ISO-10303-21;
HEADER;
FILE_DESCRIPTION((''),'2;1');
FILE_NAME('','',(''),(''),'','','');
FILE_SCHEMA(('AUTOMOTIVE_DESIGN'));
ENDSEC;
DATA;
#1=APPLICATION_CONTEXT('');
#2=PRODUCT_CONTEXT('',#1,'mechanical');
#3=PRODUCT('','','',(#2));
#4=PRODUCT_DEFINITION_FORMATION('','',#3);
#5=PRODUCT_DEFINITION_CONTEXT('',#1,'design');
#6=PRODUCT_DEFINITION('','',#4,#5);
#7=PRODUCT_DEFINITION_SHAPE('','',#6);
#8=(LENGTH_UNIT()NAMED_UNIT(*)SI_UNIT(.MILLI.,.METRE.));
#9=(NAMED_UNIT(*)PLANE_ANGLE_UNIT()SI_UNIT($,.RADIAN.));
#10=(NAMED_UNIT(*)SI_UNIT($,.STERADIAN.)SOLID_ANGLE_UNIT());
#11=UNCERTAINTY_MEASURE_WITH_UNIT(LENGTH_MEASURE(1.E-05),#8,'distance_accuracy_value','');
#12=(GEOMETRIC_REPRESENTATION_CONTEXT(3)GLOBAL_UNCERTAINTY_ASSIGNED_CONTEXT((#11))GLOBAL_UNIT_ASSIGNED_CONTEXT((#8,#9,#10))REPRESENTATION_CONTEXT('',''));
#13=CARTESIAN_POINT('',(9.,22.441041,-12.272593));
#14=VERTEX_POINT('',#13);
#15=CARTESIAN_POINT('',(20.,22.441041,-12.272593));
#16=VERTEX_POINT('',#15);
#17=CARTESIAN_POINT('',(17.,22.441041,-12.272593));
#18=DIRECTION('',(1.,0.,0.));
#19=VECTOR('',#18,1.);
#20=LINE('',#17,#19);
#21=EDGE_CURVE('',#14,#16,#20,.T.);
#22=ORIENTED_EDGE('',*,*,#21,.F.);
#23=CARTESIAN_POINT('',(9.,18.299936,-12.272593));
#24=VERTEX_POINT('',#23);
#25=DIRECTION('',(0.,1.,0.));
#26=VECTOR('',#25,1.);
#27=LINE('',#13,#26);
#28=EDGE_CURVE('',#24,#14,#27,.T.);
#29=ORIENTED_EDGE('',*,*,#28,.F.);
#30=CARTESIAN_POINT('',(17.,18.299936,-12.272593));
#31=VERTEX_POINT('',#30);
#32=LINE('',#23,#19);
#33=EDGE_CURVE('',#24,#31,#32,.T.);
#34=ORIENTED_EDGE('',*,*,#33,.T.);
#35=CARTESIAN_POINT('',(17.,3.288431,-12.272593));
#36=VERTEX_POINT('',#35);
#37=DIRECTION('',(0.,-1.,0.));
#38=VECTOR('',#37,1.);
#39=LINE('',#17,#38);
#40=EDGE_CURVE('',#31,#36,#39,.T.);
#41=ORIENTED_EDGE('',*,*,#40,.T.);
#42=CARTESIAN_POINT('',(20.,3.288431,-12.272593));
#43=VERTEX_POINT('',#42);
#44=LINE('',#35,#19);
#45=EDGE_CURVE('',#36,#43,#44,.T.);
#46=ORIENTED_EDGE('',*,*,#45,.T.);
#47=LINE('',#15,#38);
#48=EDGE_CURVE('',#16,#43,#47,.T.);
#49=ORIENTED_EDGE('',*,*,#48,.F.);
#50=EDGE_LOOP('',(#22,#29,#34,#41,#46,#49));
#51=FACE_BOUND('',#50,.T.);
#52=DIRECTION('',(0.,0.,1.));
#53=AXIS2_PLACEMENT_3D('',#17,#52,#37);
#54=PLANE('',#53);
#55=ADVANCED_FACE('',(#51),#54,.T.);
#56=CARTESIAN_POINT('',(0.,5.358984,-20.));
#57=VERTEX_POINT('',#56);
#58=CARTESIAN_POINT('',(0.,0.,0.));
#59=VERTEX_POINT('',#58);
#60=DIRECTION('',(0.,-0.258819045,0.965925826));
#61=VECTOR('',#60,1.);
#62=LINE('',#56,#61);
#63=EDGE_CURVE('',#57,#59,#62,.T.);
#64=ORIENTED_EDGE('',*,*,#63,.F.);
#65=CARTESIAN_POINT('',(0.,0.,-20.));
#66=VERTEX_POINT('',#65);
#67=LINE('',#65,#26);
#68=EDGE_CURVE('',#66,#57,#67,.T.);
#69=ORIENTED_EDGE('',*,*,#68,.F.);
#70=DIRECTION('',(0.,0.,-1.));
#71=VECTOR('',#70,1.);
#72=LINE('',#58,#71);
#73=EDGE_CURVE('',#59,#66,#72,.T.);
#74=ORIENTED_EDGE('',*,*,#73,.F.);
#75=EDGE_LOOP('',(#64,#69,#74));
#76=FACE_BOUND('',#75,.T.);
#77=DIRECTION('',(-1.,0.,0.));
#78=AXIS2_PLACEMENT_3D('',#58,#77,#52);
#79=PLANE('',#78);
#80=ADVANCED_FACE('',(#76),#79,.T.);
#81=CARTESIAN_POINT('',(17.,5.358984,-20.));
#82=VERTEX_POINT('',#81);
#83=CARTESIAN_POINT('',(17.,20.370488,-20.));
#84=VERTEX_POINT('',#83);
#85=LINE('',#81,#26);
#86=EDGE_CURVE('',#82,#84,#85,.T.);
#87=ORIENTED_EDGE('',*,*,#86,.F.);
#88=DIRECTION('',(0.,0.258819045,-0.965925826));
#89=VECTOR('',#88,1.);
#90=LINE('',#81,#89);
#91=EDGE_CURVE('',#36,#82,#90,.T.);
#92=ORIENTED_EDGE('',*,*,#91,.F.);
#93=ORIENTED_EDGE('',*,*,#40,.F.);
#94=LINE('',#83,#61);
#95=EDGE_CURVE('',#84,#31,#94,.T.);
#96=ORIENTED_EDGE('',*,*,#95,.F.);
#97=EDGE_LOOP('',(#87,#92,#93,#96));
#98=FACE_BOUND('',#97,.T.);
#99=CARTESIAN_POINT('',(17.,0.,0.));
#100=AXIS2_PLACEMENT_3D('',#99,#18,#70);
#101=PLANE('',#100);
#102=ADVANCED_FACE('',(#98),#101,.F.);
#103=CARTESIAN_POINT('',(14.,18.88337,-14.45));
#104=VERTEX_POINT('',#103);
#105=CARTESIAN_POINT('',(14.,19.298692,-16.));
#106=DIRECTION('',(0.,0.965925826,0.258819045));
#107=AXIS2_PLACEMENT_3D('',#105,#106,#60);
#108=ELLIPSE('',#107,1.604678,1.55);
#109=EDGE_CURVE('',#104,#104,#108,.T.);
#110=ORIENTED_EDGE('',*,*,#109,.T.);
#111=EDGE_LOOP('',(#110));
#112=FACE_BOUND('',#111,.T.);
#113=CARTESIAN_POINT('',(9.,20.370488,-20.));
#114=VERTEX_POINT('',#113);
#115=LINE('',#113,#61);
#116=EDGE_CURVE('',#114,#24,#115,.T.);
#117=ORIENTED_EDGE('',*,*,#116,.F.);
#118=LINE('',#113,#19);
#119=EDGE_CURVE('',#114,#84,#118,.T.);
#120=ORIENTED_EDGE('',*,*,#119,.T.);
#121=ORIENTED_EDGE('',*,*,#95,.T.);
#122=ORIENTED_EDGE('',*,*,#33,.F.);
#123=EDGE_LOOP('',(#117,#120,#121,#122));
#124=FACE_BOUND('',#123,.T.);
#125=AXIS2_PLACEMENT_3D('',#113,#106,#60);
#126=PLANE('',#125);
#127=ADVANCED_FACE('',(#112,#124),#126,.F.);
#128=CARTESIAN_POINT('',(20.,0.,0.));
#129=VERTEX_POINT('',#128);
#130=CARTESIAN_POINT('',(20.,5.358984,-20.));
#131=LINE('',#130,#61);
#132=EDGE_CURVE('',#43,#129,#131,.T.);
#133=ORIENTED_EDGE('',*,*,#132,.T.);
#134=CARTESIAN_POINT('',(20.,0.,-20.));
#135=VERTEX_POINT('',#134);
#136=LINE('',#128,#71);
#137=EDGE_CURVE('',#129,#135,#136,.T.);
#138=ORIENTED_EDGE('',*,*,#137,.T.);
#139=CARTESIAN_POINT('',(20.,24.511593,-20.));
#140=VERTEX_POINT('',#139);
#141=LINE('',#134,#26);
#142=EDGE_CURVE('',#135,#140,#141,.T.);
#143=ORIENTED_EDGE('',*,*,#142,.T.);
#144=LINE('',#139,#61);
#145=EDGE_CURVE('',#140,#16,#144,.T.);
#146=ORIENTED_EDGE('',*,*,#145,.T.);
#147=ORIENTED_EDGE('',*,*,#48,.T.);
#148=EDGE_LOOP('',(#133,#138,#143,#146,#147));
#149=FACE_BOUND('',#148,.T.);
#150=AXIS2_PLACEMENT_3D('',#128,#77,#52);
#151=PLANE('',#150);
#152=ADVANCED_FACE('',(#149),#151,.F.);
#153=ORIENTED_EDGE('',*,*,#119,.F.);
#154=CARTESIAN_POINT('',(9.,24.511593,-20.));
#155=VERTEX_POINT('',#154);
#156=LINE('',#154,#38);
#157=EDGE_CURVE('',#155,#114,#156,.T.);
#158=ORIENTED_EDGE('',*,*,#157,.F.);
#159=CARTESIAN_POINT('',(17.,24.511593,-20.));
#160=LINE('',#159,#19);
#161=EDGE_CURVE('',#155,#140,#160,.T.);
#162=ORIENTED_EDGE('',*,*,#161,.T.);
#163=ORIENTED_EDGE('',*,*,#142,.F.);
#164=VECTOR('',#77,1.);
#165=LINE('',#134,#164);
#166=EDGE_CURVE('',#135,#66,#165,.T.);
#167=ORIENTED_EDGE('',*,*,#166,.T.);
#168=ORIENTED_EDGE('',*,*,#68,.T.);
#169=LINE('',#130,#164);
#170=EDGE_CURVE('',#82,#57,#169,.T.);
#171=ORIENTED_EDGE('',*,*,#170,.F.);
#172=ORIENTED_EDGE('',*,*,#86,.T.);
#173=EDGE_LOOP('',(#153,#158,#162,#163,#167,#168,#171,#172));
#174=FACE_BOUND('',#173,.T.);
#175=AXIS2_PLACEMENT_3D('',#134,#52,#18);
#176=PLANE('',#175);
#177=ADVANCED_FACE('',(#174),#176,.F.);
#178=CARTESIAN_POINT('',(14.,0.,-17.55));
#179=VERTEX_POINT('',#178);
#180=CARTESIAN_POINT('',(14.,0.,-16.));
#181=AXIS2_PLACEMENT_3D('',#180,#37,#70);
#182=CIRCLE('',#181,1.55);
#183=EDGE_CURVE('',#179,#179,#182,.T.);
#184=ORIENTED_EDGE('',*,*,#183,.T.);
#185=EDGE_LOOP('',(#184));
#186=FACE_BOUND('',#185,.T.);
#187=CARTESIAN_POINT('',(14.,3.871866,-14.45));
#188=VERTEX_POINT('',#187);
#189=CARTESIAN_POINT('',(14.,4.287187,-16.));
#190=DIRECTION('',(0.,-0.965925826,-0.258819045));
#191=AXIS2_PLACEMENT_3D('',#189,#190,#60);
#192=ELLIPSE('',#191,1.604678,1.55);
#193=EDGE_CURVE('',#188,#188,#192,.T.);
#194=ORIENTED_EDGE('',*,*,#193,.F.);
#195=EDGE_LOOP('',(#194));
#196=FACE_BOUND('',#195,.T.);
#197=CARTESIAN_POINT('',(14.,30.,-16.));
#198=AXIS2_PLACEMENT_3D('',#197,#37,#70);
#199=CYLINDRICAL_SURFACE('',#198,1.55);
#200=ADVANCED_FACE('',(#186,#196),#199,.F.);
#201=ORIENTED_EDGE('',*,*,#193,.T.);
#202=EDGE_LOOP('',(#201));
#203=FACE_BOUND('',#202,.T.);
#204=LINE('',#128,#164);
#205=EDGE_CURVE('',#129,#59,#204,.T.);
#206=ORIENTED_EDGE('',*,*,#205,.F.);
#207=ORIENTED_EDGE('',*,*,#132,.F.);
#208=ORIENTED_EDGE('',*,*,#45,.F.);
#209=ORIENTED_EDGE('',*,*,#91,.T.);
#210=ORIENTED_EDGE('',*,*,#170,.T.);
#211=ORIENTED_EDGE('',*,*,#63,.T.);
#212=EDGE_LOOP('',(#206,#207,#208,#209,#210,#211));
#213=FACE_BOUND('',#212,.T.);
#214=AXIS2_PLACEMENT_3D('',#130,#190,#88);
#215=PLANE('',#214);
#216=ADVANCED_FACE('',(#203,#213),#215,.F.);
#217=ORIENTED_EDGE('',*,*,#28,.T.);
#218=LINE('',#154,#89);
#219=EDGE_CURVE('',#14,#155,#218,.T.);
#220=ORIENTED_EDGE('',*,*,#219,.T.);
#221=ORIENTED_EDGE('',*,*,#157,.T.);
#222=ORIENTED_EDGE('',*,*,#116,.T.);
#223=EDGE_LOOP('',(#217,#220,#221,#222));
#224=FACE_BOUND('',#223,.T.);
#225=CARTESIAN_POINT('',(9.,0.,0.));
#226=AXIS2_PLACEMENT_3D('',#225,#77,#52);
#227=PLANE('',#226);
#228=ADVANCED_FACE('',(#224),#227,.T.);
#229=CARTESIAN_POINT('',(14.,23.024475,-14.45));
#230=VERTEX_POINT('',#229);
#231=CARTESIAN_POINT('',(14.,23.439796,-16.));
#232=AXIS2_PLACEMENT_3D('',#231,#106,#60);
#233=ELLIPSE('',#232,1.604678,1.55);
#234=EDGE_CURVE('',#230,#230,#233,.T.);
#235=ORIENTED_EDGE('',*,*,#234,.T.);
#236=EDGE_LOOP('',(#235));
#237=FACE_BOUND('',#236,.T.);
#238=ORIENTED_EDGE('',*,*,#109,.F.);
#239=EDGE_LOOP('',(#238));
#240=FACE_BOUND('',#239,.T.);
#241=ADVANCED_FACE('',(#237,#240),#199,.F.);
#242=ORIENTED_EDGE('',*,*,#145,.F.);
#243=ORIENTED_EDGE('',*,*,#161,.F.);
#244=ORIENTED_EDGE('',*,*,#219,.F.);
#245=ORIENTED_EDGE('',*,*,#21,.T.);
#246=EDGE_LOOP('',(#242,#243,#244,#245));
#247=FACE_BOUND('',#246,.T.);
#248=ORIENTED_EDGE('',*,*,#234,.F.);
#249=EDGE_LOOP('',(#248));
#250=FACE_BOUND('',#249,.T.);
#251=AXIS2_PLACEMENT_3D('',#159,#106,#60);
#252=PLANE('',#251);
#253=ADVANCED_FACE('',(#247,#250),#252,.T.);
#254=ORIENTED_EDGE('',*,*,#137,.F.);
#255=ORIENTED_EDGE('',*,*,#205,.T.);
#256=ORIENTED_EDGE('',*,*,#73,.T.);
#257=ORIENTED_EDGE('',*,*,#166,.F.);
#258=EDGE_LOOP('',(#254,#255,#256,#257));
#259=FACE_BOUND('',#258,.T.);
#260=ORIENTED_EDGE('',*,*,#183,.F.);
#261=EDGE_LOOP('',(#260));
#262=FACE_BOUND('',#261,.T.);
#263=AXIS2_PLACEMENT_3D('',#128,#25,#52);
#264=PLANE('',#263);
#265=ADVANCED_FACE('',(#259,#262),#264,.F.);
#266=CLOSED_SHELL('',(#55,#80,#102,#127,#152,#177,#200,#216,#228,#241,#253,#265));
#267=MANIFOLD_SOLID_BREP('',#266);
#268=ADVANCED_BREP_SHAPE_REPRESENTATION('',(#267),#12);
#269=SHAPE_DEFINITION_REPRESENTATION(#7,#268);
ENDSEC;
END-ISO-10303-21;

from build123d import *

# Parameters (mm, degrees)
EXTRUDE_3_DEPTH     = 20
EXTRUDE_START       = -3
EXTRUDE_4_DEPTH     = 3
EXTRUDE_7_DEPTH     = 8
SKETCH_13_R         = 1.55
CUT_EXTRUDE_2_DEPTH = 30


# Read off the part's stored shape, not the designer's step: 凸台-拉伸4
with BuildPart() as part:
    # 草图3 → 凸台-拉伸3 (new body)
    with BuildSketch(Plane(origin=(0, 0, 0), x_dir=(0, 0, -1), z_dir=(1, 0, 0))):
        Polygon((0, 0), (20, 0), (20, 5.358983849), align=None)
    extrude(amount=EXTRUDE_3_DEPTH)

    # 凸台-拉伸4 outline → 凸台-拉伸4 (add)
    with BuildSketch(Plane(origin=(20, 0, 0), x_dir=(0, 0, -1), z_dir=(1, 0, 0)).offset(EXTRUDE_START)):
        Polygon((20, 5.358983849), (20, 24.511593186), (12.27259339, 22.441040825), (12.27259339, 3.288431488), align=None)
    extrude(amount=EXTRUDE_4_DEPTH)

    # 草图9 → 凸台-拉伸7 (add)
    with BuildSketch(Plane.ZY.offset(-17)):
        Polygon((-20, 24.511593186), (-12.27259339, 22.441040825), (-12.27259339, 18.299936104), (-20, 20.370488465), align=None)
    extrude(amount=EXTRUDE_7_DEPTH)

    # 草图13 → 切除-拉伸2 (cut)
    with BuildSketch(Plane.XZ):
        with Locations(Location((14, -16, 0), (0, 0, 90))):
            Circle(SKETCH_13_R)
    extrude(amount=-CUT_EXTRUDE_2_DEPTH, mode=Mode.SUBTRACT)


solid = part.part
